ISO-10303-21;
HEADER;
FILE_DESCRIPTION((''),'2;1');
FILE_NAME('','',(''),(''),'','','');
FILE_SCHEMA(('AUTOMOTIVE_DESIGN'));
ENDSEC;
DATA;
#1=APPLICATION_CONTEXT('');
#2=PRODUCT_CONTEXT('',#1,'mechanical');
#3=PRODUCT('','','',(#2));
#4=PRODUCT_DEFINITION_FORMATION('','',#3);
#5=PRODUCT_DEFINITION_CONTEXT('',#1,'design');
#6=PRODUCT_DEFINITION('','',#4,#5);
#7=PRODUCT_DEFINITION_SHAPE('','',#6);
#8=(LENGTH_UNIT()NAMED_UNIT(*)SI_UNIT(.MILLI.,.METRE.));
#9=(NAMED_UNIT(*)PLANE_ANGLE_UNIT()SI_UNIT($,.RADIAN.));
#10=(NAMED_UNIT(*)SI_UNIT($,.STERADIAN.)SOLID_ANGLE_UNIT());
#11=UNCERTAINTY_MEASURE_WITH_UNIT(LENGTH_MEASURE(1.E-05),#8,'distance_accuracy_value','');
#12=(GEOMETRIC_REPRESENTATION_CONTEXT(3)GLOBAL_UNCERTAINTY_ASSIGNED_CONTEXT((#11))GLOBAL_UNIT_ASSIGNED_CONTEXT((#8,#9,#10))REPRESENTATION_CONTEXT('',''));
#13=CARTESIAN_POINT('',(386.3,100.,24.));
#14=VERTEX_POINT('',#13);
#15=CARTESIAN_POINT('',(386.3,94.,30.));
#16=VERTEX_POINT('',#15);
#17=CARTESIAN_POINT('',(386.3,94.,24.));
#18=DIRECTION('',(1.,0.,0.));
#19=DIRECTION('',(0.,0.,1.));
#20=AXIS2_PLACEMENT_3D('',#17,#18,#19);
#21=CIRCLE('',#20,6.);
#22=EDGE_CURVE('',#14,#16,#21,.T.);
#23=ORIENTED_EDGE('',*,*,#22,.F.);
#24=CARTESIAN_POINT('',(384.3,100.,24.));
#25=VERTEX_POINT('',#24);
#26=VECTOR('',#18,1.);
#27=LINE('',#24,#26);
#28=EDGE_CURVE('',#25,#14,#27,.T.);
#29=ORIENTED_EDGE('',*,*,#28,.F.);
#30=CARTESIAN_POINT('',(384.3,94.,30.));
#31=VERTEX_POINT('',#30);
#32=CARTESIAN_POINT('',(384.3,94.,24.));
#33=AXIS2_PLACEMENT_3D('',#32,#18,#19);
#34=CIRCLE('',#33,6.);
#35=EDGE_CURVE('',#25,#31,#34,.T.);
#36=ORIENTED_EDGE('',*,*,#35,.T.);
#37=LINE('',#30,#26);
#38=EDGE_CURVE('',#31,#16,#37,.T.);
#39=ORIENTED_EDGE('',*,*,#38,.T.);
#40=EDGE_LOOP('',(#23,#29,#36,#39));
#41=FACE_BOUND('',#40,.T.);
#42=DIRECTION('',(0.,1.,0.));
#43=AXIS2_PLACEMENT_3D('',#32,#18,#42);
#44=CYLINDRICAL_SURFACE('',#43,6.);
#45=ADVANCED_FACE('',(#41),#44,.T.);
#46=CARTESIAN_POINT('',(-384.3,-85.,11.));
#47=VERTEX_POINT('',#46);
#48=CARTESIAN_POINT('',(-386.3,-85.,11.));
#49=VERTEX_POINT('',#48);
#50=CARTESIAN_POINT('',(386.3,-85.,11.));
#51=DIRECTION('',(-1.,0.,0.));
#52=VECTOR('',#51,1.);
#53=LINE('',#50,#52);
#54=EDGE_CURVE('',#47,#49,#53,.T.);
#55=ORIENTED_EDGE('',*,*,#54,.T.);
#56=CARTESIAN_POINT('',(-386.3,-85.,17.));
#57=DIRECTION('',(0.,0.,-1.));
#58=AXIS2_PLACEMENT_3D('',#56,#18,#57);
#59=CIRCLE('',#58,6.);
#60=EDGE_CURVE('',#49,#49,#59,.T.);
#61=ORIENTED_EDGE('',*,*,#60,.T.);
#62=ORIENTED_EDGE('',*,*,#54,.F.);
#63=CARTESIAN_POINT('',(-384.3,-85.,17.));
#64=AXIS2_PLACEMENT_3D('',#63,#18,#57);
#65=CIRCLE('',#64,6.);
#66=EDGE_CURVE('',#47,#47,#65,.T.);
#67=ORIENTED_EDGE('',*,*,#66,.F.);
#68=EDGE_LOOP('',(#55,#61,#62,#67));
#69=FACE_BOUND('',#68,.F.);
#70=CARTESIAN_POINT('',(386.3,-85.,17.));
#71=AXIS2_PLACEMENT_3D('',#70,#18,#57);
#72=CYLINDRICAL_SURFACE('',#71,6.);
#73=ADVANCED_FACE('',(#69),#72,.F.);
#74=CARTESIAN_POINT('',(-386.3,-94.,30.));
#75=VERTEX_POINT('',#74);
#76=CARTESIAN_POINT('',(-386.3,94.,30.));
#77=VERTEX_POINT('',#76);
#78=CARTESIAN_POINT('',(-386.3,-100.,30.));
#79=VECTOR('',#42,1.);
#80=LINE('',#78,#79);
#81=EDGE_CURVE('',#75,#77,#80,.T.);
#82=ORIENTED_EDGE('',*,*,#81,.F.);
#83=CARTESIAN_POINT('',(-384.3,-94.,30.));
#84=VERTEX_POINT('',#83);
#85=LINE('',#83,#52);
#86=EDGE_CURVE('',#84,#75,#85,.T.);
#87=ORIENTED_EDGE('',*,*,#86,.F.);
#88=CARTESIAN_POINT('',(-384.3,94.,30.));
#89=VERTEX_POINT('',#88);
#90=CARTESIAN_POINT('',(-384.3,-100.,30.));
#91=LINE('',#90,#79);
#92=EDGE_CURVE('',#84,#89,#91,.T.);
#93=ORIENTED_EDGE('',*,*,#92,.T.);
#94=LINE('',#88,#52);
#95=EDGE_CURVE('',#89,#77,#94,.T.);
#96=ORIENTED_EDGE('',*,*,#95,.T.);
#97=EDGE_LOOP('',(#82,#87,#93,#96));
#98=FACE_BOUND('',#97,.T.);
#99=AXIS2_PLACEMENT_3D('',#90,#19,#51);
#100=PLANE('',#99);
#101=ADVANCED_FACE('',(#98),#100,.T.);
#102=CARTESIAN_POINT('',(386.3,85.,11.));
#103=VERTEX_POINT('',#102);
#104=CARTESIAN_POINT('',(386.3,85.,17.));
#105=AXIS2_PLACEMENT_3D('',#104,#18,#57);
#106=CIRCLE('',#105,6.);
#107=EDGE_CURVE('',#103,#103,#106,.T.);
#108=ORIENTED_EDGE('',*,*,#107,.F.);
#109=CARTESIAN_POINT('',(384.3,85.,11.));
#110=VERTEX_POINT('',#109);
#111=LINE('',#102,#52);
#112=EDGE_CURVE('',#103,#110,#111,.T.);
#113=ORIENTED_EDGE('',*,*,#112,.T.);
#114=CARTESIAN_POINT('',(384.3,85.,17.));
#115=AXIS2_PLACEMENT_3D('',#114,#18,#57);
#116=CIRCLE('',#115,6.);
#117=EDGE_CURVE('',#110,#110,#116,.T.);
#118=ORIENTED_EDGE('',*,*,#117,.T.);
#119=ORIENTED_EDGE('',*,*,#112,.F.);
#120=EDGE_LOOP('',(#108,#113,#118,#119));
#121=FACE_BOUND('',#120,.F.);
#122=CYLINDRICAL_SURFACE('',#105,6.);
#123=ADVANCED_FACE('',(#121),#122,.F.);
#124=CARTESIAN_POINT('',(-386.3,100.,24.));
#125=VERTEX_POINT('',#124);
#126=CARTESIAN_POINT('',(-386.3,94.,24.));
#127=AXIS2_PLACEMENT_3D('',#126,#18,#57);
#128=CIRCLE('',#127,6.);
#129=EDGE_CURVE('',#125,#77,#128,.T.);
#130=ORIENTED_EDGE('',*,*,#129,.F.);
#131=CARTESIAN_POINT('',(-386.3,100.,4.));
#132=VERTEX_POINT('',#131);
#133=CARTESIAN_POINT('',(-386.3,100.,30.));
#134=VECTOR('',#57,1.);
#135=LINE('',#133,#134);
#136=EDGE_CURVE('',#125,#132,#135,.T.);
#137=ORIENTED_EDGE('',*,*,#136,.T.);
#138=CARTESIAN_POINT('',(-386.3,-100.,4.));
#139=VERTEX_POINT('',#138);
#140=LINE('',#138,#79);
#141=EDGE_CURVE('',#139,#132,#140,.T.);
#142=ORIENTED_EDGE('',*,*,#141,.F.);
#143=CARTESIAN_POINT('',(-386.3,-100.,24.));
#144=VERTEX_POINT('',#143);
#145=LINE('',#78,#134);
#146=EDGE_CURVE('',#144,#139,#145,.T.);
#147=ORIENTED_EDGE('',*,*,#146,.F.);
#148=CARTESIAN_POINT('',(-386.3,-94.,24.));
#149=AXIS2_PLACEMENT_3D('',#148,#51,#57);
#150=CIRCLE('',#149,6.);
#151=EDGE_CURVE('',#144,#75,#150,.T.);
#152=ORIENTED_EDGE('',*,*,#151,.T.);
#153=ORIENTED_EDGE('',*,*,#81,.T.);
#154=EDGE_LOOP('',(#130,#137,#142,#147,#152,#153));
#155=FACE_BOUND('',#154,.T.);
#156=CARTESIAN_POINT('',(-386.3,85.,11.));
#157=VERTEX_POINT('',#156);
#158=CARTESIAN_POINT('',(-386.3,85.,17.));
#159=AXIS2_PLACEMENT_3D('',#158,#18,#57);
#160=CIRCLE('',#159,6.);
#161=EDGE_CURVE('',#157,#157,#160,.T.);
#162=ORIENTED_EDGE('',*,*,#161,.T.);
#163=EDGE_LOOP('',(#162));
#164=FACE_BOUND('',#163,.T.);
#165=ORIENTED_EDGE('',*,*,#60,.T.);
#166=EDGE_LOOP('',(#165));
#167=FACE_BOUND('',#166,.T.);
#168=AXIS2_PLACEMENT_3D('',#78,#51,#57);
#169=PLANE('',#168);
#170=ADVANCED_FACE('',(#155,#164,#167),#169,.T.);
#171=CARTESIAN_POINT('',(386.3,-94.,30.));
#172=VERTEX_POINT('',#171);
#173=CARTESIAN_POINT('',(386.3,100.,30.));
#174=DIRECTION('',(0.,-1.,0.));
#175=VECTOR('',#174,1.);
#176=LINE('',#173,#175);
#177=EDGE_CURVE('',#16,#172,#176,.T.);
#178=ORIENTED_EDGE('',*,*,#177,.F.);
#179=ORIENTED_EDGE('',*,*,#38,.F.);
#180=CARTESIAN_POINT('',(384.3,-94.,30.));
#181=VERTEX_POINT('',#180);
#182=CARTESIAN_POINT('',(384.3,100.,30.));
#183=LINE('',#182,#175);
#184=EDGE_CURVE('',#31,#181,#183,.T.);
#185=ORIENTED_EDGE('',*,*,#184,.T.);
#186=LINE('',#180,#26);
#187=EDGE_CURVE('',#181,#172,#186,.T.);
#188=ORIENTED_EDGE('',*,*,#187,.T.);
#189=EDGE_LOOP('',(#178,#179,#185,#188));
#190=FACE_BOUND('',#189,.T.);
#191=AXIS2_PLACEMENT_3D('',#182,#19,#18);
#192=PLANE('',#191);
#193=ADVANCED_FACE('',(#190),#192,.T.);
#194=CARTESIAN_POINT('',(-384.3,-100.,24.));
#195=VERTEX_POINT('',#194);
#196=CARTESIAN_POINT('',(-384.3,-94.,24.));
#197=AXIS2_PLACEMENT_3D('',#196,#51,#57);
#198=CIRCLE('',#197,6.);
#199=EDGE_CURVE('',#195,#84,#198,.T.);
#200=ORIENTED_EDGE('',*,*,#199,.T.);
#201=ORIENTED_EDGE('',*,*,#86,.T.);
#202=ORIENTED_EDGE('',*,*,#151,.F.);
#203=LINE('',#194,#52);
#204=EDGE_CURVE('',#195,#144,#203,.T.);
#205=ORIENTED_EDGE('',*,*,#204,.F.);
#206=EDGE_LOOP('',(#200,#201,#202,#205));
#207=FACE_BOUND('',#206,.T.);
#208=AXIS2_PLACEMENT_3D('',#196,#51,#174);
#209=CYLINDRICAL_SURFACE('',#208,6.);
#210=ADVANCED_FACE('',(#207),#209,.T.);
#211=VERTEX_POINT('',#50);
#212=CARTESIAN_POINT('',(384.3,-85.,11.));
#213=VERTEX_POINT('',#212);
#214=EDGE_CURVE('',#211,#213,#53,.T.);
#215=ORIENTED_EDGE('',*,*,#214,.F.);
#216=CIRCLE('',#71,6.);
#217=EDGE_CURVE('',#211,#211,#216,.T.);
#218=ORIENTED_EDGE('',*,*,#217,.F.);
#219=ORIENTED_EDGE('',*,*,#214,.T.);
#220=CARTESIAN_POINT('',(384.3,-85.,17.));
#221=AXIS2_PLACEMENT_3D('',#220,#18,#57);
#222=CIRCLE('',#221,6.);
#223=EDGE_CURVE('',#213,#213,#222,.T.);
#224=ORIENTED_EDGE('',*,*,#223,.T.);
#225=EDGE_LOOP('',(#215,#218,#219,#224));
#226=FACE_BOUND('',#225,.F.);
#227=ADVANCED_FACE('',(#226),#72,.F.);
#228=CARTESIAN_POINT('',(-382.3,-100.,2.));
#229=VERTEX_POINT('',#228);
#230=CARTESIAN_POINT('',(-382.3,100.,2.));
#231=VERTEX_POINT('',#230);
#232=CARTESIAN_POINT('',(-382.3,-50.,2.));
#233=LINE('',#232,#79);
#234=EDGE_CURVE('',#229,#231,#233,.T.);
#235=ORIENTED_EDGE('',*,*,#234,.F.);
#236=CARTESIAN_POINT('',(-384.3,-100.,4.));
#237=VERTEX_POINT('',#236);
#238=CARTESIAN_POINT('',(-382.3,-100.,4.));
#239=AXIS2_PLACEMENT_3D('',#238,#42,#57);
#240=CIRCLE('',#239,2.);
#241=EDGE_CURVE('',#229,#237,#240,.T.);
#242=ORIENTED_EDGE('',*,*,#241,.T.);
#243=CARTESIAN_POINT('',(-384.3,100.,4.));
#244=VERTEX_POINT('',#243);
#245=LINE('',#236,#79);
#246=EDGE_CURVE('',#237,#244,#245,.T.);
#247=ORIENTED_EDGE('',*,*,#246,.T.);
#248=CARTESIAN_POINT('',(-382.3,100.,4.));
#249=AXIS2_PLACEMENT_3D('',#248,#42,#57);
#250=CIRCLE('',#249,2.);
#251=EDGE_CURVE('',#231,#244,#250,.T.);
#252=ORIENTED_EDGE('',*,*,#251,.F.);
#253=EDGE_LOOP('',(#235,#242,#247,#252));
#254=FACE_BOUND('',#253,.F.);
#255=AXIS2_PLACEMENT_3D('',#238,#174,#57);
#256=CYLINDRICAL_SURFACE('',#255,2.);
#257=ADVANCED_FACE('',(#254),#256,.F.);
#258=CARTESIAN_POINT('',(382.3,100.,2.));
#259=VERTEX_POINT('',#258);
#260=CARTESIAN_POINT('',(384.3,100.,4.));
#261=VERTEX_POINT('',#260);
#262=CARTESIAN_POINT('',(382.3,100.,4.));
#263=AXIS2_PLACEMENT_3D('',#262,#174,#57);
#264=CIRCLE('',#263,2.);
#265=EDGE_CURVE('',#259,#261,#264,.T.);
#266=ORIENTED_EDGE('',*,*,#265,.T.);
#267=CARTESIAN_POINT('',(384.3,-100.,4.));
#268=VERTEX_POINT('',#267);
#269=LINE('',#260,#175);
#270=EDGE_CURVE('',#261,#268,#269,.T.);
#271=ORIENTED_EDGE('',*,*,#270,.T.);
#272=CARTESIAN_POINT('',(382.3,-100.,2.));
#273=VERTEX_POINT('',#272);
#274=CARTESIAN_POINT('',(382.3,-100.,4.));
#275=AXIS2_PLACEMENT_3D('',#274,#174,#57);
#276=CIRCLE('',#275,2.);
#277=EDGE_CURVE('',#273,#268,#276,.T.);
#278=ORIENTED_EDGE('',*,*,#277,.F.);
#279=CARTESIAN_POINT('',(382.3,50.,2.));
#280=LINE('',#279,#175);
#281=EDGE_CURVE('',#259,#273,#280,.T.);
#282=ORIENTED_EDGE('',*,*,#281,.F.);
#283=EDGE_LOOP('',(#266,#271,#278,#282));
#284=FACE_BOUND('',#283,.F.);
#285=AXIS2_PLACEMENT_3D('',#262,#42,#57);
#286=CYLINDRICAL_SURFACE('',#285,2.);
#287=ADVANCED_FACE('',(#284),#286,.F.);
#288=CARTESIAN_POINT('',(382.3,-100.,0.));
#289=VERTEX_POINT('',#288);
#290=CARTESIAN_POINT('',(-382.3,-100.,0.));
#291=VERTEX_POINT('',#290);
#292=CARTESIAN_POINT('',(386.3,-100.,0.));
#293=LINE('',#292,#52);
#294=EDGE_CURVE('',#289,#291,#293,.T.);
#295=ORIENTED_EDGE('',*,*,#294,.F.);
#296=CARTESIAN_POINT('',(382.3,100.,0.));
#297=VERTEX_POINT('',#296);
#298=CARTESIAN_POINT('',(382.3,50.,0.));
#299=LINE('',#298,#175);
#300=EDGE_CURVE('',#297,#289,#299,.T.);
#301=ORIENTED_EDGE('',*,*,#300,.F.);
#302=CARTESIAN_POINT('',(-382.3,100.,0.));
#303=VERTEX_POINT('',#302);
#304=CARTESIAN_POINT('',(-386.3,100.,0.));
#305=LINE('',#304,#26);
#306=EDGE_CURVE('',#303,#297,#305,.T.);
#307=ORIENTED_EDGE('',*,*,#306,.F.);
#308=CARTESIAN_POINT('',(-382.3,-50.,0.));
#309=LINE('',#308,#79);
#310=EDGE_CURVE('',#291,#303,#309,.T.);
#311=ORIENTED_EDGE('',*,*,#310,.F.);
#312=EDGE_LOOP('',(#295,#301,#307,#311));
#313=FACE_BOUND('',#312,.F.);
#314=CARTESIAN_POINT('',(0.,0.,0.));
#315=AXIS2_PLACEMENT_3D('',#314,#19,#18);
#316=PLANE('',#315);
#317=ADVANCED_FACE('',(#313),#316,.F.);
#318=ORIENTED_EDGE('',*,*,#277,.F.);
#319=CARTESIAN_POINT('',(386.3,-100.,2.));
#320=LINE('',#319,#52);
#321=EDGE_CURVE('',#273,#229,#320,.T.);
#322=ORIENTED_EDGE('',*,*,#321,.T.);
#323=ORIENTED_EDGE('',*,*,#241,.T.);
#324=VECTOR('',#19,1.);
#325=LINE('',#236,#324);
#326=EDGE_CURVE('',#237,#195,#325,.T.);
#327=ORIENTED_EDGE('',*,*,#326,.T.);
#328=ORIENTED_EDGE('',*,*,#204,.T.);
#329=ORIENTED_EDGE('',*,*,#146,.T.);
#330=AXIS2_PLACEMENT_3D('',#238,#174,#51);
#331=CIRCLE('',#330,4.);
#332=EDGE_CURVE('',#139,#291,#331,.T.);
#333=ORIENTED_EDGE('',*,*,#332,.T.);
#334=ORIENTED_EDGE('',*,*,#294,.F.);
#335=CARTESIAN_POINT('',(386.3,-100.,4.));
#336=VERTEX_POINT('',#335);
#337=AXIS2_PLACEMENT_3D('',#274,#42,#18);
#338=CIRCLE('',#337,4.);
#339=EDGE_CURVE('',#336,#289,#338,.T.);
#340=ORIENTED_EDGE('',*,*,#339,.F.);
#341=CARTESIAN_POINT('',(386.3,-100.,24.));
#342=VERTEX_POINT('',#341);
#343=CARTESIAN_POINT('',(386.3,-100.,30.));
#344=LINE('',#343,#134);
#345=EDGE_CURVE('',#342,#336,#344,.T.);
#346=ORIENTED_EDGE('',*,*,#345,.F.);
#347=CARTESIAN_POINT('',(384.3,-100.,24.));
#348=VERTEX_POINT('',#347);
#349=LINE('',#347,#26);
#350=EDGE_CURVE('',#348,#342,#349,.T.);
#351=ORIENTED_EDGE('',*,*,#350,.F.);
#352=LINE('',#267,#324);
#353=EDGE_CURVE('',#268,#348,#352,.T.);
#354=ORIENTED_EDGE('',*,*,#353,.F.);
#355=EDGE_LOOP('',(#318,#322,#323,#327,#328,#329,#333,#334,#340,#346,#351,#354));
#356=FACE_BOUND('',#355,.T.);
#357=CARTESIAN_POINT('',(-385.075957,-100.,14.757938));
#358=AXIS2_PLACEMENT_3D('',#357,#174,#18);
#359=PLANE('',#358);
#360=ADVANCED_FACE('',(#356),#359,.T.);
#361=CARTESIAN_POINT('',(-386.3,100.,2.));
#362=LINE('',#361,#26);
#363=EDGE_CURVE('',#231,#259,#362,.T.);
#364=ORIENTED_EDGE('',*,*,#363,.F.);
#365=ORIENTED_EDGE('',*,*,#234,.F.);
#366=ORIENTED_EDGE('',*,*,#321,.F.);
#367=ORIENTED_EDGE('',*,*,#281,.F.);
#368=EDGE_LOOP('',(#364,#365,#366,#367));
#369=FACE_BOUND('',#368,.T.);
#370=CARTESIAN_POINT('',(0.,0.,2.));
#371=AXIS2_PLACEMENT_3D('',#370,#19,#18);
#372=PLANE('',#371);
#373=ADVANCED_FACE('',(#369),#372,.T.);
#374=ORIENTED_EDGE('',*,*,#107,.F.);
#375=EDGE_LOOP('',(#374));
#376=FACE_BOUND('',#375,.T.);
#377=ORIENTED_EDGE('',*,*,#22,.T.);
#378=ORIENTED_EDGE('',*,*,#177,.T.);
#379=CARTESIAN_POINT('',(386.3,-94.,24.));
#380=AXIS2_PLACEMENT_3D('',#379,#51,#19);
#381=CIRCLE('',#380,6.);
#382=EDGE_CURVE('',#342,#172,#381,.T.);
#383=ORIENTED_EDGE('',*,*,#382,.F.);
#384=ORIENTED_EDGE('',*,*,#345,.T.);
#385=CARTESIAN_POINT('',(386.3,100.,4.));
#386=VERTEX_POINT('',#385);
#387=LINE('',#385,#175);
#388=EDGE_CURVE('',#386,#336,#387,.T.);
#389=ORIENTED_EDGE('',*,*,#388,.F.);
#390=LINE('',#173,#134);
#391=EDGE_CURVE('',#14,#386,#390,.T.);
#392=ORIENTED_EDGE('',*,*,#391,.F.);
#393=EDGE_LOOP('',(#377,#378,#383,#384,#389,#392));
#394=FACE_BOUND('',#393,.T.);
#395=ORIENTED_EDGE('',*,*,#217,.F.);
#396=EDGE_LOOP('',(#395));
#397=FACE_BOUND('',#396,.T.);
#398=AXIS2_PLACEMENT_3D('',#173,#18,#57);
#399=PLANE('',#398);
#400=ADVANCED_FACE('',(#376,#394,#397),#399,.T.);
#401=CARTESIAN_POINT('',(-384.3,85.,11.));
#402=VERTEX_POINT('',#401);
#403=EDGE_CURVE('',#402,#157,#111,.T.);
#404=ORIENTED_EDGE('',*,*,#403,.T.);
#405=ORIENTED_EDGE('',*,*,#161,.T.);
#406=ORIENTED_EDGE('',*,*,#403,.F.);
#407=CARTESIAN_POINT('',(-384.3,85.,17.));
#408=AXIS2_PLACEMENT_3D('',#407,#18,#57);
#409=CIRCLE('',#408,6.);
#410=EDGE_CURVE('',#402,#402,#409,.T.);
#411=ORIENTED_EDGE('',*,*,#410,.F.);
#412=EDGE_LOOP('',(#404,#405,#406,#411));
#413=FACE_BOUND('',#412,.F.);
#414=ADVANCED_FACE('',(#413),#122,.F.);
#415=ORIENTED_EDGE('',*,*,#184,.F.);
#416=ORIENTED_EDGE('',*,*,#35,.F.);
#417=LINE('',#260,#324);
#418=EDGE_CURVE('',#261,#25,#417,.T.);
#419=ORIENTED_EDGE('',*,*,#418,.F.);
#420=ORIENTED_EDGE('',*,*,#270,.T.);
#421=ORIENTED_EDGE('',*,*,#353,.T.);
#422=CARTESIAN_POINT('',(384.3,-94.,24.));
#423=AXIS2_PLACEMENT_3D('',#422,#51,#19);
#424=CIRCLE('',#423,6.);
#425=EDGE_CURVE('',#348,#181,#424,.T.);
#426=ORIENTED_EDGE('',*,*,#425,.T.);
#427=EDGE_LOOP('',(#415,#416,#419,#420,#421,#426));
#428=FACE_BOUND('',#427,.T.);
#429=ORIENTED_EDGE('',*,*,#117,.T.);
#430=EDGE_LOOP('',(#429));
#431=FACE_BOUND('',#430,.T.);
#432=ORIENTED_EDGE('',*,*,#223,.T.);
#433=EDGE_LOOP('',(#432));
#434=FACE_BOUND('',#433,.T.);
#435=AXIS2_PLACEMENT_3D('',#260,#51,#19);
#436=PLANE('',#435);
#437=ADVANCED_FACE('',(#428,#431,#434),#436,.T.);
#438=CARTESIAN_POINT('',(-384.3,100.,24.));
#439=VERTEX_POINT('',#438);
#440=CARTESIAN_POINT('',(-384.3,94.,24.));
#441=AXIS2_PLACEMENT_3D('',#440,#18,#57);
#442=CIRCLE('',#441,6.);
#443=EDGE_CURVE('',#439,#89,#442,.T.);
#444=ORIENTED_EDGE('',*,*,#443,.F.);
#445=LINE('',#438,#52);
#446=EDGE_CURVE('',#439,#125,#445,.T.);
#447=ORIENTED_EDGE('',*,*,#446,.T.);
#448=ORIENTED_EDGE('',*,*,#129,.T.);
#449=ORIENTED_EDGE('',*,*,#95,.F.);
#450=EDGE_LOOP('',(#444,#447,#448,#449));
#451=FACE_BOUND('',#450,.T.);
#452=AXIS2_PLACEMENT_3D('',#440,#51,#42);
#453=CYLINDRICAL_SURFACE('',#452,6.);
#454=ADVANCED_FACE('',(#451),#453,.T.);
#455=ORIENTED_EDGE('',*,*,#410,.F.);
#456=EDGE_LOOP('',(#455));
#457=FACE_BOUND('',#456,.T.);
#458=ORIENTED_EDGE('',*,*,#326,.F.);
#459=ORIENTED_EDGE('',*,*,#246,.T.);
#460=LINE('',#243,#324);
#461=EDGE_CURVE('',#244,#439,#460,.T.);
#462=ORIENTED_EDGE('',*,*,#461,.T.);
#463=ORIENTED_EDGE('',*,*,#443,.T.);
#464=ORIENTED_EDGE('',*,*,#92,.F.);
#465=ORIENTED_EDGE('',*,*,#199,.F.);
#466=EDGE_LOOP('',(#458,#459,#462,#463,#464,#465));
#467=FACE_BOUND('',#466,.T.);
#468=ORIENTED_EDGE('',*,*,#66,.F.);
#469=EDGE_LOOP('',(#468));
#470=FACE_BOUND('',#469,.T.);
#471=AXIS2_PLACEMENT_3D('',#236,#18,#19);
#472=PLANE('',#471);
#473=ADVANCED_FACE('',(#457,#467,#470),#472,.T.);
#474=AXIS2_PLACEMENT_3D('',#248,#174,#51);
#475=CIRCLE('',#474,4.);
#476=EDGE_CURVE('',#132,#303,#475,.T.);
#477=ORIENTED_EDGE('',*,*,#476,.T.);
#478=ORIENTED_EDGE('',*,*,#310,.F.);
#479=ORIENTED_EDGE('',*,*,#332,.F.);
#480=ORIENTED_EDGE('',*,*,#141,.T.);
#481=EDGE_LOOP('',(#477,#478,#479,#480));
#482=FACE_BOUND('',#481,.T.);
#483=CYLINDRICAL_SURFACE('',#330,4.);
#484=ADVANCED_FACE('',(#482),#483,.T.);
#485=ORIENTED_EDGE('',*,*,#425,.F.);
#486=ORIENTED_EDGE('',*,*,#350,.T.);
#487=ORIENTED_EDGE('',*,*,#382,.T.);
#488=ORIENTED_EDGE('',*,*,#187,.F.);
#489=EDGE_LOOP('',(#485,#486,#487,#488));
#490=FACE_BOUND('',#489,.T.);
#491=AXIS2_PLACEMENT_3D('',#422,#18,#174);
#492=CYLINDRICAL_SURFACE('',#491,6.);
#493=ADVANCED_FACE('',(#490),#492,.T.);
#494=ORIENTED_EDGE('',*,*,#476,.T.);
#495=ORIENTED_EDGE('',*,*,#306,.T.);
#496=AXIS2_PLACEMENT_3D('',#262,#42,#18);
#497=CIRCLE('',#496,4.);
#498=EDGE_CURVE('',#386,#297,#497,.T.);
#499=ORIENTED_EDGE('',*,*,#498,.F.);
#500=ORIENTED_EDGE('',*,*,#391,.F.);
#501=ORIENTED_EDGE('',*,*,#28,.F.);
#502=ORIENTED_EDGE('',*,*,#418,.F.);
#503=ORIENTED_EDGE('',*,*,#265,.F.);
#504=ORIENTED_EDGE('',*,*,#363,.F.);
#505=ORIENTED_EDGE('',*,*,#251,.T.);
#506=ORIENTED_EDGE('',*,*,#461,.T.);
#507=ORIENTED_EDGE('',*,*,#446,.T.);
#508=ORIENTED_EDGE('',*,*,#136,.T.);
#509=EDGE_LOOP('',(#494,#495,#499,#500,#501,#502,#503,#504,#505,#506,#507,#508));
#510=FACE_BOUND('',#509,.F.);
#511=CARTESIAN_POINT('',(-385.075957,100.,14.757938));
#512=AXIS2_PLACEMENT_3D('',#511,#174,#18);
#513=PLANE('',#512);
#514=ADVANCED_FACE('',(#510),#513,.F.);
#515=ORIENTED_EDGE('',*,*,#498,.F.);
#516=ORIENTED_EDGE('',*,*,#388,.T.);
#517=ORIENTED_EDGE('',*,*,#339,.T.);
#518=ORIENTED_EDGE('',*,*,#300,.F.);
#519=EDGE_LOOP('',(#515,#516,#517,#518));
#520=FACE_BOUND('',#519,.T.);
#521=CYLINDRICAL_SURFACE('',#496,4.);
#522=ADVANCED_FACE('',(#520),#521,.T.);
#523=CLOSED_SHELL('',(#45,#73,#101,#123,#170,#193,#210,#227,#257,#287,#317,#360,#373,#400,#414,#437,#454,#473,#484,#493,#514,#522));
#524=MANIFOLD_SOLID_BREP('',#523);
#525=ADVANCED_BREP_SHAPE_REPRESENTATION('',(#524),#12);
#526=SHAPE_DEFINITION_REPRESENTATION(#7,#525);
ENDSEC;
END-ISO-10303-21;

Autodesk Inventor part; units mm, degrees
ref_plane "YZ Plane" through (0, 0, 0) normal (1, 0, 0) x (0, 1, 0)
ref_plane "XZ Plane" through (0, 0, 0) normal (0, 1, 0) x (-1, 0, 0)
ref_plane "XY Plane" through (0, 0, 0) normal (0, 0, 1) x (1, 0, 0)
sketch "Boceto1" plane through (0, 0, 0) normal (0, 0, 1) x (1, 0, 0)
  line L0 (386.3, -100) -> (-386.3, -100)
  line L1 (-386.3, -100) -> (-386.3, 100)
  line L2 (-386.3, 100) -> (386.3, 100)
  line L3 (386.3, 100) -> (386.3, -100)
  line L4 (386.3, -100) -> (-386.3, 100) construction
  line L5 (-386.3, -100) -> (386.3, 100) construction
  point P0 (0, 0)
  dimension "d0" = 772.6
  dimension "d1" = 200
extrude "Placa1" add sketch "Boceto1" along normal blind 2
sketch "Boceto2" plane through (-384.3, -100, 0) normal (-1, 0, 0) x (0, -1, 0)
  line L0 (-200, 0) -> (0, 0)
  line L1 (0, 0) -> (0, 30)
  line L2 (0, 30) -> (-200, 30)
  line L3 (-200, 30) -> (-200, 0)
edge flange "Pestaña1" height 30 angle 90 thickness 2 bend radius 2 thickness toward (-1, 0, 0) relief tear relief width 2 relief depth 1 corner gap 2 corner form 0 edges at (-386.3, 0, 2) (386.3, 0, 2) wall of the first edge with corners at (-384.3, 100, 0) (-384.3, -100, 0) (-384.3, -100, 30) (-384.3, 100, 30)
bend "Doblez1"
corner "Esquina1"
sketch "Boceto3" plane through (386.3, -100, 30) normal (1, 0, 0) x (0, 0, -1)
  circle A0 centre (13, 185) radius 6
  circle A1 centre (13, 15) radius 6
  line L0 (26, 0) -> (0, 0) projected
  line L1 (0, 200) -> (26, 200) projected
  point P0 (30, 100)
  point P1 (13, 0)
  point P2 (13, 200)
  dimension "d13" = 12
  dimension "d14" = 12
  dimension "d16" = 15
  dimension "d17" = 15
extrude "Extrusión1" cut sketch "Boceto3" against normal through all
fillet "Redondeo de esquina1" radius 6 4 edges at (385.3, -100, 30) (-385.3, -100, 30) (-385.3, 100, 30) (385.3, 100, 30)
equation "\"d2\" = Thickness"
equation "\"d3\" = BendReliefWidth"
equation "\"d4\" = BendReliefDepth"
equation "\"d5\" = MinimumRemnant"
equation "\"d6\" = TransitionRadius"
equation "\"d9\" = BendRadius"
equation "\"d10\" = CornerReliefSize"
equation "\"d11\" = GapSize"
equation "\"d12\" = JacobiRadiusSize"
equation "\"BendRadius\" = Thickness"
equation "\"BendReliefWidth\" = Thickness"
equation "\"BendReliefDepth\" = 0.5 * Thickness"
equation "\"CornerReliefSize\" = 4 * Thickness"
equation "\"MinimumRemnant\" = 2 * Thickness"
equation "\"TransitionRadius\" = BendRadius"
equation "\"JacobiRadiusSize\" = BendRadius"
equation "\"GapSize\" = Thickness"
equation "\"Thickness\" = 2"
properties part number "Conector"
